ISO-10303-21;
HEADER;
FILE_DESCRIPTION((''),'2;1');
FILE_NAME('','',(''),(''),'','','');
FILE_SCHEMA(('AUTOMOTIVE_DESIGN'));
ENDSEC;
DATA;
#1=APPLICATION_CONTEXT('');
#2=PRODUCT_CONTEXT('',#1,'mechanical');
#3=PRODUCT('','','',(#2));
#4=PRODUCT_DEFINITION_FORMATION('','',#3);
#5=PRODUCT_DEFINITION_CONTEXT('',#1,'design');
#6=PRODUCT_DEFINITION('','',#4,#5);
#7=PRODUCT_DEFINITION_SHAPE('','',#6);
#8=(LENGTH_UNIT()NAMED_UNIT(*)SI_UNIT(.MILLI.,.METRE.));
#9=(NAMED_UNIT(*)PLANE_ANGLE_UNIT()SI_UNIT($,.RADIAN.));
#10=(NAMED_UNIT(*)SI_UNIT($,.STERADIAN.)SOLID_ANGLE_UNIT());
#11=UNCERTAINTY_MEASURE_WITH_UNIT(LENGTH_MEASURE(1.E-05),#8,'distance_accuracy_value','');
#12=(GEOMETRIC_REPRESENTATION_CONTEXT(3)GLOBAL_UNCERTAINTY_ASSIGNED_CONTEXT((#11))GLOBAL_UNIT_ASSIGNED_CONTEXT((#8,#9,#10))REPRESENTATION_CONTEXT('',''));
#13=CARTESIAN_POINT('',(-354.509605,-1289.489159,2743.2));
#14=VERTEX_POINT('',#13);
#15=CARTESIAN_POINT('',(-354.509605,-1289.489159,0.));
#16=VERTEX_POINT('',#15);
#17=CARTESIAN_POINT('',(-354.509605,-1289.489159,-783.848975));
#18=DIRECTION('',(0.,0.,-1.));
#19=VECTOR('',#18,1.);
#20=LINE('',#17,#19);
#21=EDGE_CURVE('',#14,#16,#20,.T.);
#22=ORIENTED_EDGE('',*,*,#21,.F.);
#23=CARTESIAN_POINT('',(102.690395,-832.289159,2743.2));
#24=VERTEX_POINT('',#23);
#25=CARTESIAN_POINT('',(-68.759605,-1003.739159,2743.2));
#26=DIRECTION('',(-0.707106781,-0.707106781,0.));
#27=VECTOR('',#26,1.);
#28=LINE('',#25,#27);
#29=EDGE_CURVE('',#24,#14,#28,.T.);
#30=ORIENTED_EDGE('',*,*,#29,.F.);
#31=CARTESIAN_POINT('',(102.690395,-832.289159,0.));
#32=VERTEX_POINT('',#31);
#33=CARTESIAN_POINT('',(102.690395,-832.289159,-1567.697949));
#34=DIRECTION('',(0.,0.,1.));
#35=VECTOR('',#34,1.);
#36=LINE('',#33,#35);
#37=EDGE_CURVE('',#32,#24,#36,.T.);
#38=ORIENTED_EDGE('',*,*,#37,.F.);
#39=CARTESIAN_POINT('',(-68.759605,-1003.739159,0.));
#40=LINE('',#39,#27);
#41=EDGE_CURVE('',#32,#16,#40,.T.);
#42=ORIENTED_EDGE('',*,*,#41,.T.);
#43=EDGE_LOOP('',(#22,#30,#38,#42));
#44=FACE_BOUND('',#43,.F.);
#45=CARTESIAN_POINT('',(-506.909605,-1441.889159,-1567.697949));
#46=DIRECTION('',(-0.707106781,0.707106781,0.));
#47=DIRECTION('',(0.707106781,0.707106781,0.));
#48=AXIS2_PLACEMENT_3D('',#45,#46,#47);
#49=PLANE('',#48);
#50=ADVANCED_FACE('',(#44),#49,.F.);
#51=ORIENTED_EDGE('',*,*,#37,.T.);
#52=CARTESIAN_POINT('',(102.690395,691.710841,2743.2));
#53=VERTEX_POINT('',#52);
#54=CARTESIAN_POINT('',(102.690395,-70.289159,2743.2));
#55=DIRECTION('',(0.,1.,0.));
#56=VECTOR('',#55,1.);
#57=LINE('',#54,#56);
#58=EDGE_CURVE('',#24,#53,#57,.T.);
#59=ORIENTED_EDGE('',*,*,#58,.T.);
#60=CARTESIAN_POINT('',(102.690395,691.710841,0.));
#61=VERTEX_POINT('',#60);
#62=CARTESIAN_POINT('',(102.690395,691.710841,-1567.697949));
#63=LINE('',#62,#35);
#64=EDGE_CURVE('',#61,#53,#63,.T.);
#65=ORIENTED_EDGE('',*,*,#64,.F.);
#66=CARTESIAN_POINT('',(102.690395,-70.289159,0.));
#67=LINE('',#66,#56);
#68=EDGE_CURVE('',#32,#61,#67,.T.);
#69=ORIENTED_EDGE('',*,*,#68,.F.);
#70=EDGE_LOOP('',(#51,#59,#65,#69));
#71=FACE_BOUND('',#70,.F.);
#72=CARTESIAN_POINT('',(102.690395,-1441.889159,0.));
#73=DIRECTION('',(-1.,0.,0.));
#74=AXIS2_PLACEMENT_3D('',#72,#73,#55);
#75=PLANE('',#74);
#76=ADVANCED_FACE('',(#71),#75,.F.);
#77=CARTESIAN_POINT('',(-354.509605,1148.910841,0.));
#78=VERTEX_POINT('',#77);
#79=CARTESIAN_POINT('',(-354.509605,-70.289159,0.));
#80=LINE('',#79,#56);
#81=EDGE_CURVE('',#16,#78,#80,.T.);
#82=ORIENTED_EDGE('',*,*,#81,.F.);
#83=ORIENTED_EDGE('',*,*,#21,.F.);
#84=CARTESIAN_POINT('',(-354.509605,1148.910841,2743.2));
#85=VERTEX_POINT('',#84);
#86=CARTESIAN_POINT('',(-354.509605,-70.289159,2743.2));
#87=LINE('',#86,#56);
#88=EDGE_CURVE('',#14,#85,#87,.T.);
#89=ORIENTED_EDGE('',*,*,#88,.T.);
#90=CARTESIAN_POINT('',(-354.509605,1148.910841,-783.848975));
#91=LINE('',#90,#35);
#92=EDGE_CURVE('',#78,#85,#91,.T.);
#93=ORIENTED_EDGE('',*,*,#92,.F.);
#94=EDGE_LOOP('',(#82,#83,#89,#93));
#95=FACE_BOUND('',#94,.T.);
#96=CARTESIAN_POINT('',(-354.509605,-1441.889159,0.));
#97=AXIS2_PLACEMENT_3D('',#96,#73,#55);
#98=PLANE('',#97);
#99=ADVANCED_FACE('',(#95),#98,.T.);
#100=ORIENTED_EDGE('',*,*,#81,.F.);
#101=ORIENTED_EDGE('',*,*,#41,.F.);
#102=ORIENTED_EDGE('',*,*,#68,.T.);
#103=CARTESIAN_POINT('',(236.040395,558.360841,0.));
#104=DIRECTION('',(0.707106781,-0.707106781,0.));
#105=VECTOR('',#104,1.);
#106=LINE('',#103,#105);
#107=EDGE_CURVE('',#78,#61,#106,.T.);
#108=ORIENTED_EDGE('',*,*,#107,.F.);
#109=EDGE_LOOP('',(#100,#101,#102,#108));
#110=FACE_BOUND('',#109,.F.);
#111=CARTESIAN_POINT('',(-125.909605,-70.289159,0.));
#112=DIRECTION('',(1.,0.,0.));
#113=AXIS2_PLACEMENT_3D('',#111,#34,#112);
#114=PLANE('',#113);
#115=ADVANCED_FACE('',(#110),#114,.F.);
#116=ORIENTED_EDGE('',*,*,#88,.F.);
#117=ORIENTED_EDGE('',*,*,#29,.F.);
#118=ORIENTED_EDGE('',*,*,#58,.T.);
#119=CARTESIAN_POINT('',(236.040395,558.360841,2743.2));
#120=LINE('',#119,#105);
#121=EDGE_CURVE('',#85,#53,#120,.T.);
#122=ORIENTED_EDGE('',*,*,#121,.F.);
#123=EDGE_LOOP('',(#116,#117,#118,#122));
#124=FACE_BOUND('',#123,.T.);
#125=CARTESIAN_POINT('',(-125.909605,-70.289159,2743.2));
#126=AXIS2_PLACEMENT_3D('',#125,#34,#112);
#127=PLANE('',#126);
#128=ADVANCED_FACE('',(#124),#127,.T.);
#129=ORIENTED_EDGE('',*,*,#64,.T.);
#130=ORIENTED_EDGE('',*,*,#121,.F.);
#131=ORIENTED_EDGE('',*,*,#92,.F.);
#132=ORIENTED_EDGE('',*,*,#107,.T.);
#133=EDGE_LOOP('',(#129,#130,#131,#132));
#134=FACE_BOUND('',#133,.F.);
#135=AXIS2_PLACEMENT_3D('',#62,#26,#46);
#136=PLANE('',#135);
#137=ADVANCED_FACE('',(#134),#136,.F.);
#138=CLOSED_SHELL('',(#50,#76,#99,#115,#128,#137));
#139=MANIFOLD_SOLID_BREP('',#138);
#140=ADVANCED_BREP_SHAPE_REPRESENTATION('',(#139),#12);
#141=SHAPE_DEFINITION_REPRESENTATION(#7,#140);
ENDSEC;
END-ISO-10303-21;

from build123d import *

# Parameters (mm, degrees)
F0_W        = 457.2
F0_H        = 2743.2
F1_DEPTH    = 2743.2
F2_T1_DEPTH = 5878.595898928


# Not quite as in the source:
# - a fillet or chamfer that OpenCascade refuses, or shapes differently, is made with other operations: its cross-section is extruded or revolved along the edge and cut away or added


with BuildPart() as f1:
    # F0 (on Top) → F1 (new body)
    with BuildSketch(Plane.XY):
        with Locations((-125.9096050531, -70.289158705)):
            Rectangle(F0_W, F0_H)
    extrude(amount=F1_DEPTH)

    # F2: chamfer of 609.6 on 2 edges, made by hand

    # F2_s2 → F2_t1 (cut)
    with BuildSketch(Plane.XY.offset(-1567.697949464)):
        Polygon((-506.9096050531, -1441.889158705), (102.6903949469, -832.289158705), (102.6903949469, -1441.889158705), align=None)
        Polygon((102.6903949469, 691.710841295), (-506.9096050531, 1301.310841295), (102.6903949469, 1301.310841295), align=None)
    extrude(amount=F2_T1_DEPTH, mode=Mode.SUBTRACT)


solid = f1.part
